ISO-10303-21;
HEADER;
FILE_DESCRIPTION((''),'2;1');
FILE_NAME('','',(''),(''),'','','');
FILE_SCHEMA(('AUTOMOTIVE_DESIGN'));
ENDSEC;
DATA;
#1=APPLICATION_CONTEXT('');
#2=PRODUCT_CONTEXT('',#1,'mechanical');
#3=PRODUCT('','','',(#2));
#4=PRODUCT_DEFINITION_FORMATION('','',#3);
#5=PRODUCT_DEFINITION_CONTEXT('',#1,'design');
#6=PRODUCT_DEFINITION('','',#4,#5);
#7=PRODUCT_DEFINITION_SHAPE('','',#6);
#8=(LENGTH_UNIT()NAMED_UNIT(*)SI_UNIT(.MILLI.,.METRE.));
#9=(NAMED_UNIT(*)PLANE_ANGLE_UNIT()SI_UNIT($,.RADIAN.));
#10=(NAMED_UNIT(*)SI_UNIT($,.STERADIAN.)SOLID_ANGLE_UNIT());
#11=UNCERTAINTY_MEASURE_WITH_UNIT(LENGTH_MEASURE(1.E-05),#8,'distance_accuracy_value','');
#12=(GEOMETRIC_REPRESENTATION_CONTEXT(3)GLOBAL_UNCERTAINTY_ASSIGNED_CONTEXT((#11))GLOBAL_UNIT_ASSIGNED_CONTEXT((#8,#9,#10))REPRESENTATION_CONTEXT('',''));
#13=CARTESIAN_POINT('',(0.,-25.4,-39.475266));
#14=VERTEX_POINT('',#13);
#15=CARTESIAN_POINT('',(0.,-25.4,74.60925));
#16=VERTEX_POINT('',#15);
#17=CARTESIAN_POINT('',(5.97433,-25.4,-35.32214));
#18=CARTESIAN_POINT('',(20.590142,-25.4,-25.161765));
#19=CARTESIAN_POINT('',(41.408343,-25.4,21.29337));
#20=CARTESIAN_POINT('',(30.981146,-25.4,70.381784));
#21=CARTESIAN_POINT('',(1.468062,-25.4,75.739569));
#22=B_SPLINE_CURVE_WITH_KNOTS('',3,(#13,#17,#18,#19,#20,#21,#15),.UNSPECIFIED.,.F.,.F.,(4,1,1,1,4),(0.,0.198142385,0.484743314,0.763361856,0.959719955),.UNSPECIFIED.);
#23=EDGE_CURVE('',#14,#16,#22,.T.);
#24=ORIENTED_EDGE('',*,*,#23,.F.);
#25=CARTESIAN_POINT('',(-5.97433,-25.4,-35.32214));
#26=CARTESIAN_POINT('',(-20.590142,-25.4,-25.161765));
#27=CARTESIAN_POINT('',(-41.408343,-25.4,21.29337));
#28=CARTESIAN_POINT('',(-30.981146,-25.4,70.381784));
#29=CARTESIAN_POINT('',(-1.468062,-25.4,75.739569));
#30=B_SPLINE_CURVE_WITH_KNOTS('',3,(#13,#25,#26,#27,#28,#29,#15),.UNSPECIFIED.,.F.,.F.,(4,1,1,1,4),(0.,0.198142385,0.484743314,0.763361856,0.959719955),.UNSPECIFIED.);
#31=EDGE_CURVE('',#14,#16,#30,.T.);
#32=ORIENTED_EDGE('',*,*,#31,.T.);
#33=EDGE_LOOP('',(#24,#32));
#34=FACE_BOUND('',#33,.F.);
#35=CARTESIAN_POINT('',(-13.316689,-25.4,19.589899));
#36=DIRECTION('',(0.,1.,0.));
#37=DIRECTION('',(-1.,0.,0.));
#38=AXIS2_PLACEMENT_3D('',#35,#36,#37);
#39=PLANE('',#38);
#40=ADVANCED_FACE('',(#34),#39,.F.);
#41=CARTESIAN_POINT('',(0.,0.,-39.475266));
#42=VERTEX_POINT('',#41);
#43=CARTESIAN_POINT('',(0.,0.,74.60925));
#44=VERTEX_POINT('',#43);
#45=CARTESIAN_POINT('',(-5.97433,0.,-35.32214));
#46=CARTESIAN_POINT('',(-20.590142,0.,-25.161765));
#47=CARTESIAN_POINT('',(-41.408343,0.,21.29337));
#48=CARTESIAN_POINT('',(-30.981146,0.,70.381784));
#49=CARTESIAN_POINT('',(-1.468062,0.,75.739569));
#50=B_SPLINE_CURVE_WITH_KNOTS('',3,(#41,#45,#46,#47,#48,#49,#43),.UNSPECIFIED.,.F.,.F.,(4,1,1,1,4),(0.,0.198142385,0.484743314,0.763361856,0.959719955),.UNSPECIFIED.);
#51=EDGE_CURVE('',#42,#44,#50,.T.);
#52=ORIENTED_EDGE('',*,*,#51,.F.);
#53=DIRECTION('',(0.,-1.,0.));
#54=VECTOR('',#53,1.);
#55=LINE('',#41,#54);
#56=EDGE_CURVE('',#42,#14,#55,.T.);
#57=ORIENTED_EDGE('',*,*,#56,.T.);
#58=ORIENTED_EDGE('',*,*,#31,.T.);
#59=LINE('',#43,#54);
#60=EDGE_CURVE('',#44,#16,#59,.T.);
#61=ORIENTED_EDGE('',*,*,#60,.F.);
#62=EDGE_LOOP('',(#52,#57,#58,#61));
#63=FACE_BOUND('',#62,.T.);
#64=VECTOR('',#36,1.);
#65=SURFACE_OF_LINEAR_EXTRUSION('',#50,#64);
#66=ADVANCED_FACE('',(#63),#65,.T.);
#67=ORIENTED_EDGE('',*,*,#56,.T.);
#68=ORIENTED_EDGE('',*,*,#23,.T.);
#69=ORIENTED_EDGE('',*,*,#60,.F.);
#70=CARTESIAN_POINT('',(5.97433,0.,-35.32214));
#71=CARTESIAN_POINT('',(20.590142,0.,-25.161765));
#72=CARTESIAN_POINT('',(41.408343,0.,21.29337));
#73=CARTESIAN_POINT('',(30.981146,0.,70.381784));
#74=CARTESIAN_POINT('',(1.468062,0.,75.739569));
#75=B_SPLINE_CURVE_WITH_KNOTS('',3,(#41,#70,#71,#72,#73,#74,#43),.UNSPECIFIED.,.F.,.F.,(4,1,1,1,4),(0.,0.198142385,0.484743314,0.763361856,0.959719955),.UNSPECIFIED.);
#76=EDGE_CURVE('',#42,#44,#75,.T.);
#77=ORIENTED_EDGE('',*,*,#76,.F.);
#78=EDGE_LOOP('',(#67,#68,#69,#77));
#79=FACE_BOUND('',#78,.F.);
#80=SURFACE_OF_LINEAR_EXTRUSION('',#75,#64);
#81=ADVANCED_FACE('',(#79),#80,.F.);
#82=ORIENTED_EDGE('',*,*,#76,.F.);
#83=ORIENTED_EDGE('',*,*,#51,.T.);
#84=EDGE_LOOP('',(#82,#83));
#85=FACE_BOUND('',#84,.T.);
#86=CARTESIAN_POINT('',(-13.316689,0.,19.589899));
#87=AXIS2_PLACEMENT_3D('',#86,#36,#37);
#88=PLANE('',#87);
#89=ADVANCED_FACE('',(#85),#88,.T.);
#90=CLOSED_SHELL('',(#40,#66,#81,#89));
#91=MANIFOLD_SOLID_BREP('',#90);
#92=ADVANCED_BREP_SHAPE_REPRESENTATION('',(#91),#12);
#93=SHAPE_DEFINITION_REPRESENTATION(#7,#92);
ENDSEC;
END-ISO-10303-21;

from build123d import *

# Parameters (mm, degrees)
F1_DEPTH = 25.4


with BuildPart() as f1:
    # F0 (on Front) → F1 (new body)
    with BuildSketch(Plane.XZ):
        with BuildLine():
            add(Edge.make_bspline(
                [(0, -39.4752658904), (-5.9743297577, -35.3221398514), (-20.5901420925, -25.1617645997), (-41.4083426371, 21.2933695148), (-30.9811462178, 70.3817835785), (-1.4680619477, 75.739568974), (0, 74.6092498302)],
                knots=[0, 0, 0, 0, 0.1981423854, 0.4847433144, 0.7633618557, 0.9597199549, 0.9597199549, 0.9597199549, 0.9597199549], degree=3))
            Line((0, -39.4752658904), (0, 73.6320614815))
            add(Edge.make_bspline(
                [(0, 74.6092498302), (-0.3011518332, 74.3773810847), (-0.1506598826, 74.0047417367), (0, 73.6320614815)],
                knots=[0.9597199549, 0.9597199549, 0.9597199549, 0.9597199549, 1, 1, 1, 1], degree=3))
        make_face()
        with BuildLine():
            Line((0, 73.6320614815), (0, -39.4752658904))
            add(Edge.make_bspline(
                [(0, -39.4752658904), (5.9743297577, -35.3221398514), (20.5901420925, -25.1617645997), (41.4083426371, 21.2933695148), (30.9811462178, 70.3817835785), (1.4680619477, 75.739568974), (0, 74.6092498302)],
                knots=[0, 0, 0, 0, 0.1981423854, 0.4847433144, 0.7633618557, 0.9597199549, 0.9597199549, 0.9597199549, 0.9597199549], degree=3))
            add(Edge.make_bspline(
                [(0, 74.6092498302), (0.3011518332, 74.3773810847), (0.1506598826, 74.0047417367), (0, 73.6320614815)],
                knots=[0.9597199549, 0.9597199549, 0.9597199549, 0.9597199549, 1, 1, 1, 1], degree=3))
        make_face()
        with BuildLine():
            add(Edge.make_bspline(
                [(0, 74.6092498302), (0.3011518332, 74.3773810847), (0.1506598826, 74.0047417367), (0, 73.6320614815)],
                knots=[0.9597199549, 0.9597199549, 0.9597199549, 0.9597199549, 1, 1, 1, 1], degree=3))
            Line((0, 74.6092498302), (0, 73.6320614815))
        make_face()
        with BuildLine():
            Line((0, 73.6320614815), (0, 74.6092498302))
            add(Edge.make_bspline(
                [(0, 74.6092498302), (-0.3011518332, 74.3773810847), (-0.1506598826, 74.0047417367), (0, 73.6320614815)],
                knots=[0.9597199549, 0.9597199549, 0.9597199549, 0.9597199549, 1, 1, 1, 1], degree=3))
        make_face()
    extrude(amount=F1_DEPTH)


solid = f1.part
